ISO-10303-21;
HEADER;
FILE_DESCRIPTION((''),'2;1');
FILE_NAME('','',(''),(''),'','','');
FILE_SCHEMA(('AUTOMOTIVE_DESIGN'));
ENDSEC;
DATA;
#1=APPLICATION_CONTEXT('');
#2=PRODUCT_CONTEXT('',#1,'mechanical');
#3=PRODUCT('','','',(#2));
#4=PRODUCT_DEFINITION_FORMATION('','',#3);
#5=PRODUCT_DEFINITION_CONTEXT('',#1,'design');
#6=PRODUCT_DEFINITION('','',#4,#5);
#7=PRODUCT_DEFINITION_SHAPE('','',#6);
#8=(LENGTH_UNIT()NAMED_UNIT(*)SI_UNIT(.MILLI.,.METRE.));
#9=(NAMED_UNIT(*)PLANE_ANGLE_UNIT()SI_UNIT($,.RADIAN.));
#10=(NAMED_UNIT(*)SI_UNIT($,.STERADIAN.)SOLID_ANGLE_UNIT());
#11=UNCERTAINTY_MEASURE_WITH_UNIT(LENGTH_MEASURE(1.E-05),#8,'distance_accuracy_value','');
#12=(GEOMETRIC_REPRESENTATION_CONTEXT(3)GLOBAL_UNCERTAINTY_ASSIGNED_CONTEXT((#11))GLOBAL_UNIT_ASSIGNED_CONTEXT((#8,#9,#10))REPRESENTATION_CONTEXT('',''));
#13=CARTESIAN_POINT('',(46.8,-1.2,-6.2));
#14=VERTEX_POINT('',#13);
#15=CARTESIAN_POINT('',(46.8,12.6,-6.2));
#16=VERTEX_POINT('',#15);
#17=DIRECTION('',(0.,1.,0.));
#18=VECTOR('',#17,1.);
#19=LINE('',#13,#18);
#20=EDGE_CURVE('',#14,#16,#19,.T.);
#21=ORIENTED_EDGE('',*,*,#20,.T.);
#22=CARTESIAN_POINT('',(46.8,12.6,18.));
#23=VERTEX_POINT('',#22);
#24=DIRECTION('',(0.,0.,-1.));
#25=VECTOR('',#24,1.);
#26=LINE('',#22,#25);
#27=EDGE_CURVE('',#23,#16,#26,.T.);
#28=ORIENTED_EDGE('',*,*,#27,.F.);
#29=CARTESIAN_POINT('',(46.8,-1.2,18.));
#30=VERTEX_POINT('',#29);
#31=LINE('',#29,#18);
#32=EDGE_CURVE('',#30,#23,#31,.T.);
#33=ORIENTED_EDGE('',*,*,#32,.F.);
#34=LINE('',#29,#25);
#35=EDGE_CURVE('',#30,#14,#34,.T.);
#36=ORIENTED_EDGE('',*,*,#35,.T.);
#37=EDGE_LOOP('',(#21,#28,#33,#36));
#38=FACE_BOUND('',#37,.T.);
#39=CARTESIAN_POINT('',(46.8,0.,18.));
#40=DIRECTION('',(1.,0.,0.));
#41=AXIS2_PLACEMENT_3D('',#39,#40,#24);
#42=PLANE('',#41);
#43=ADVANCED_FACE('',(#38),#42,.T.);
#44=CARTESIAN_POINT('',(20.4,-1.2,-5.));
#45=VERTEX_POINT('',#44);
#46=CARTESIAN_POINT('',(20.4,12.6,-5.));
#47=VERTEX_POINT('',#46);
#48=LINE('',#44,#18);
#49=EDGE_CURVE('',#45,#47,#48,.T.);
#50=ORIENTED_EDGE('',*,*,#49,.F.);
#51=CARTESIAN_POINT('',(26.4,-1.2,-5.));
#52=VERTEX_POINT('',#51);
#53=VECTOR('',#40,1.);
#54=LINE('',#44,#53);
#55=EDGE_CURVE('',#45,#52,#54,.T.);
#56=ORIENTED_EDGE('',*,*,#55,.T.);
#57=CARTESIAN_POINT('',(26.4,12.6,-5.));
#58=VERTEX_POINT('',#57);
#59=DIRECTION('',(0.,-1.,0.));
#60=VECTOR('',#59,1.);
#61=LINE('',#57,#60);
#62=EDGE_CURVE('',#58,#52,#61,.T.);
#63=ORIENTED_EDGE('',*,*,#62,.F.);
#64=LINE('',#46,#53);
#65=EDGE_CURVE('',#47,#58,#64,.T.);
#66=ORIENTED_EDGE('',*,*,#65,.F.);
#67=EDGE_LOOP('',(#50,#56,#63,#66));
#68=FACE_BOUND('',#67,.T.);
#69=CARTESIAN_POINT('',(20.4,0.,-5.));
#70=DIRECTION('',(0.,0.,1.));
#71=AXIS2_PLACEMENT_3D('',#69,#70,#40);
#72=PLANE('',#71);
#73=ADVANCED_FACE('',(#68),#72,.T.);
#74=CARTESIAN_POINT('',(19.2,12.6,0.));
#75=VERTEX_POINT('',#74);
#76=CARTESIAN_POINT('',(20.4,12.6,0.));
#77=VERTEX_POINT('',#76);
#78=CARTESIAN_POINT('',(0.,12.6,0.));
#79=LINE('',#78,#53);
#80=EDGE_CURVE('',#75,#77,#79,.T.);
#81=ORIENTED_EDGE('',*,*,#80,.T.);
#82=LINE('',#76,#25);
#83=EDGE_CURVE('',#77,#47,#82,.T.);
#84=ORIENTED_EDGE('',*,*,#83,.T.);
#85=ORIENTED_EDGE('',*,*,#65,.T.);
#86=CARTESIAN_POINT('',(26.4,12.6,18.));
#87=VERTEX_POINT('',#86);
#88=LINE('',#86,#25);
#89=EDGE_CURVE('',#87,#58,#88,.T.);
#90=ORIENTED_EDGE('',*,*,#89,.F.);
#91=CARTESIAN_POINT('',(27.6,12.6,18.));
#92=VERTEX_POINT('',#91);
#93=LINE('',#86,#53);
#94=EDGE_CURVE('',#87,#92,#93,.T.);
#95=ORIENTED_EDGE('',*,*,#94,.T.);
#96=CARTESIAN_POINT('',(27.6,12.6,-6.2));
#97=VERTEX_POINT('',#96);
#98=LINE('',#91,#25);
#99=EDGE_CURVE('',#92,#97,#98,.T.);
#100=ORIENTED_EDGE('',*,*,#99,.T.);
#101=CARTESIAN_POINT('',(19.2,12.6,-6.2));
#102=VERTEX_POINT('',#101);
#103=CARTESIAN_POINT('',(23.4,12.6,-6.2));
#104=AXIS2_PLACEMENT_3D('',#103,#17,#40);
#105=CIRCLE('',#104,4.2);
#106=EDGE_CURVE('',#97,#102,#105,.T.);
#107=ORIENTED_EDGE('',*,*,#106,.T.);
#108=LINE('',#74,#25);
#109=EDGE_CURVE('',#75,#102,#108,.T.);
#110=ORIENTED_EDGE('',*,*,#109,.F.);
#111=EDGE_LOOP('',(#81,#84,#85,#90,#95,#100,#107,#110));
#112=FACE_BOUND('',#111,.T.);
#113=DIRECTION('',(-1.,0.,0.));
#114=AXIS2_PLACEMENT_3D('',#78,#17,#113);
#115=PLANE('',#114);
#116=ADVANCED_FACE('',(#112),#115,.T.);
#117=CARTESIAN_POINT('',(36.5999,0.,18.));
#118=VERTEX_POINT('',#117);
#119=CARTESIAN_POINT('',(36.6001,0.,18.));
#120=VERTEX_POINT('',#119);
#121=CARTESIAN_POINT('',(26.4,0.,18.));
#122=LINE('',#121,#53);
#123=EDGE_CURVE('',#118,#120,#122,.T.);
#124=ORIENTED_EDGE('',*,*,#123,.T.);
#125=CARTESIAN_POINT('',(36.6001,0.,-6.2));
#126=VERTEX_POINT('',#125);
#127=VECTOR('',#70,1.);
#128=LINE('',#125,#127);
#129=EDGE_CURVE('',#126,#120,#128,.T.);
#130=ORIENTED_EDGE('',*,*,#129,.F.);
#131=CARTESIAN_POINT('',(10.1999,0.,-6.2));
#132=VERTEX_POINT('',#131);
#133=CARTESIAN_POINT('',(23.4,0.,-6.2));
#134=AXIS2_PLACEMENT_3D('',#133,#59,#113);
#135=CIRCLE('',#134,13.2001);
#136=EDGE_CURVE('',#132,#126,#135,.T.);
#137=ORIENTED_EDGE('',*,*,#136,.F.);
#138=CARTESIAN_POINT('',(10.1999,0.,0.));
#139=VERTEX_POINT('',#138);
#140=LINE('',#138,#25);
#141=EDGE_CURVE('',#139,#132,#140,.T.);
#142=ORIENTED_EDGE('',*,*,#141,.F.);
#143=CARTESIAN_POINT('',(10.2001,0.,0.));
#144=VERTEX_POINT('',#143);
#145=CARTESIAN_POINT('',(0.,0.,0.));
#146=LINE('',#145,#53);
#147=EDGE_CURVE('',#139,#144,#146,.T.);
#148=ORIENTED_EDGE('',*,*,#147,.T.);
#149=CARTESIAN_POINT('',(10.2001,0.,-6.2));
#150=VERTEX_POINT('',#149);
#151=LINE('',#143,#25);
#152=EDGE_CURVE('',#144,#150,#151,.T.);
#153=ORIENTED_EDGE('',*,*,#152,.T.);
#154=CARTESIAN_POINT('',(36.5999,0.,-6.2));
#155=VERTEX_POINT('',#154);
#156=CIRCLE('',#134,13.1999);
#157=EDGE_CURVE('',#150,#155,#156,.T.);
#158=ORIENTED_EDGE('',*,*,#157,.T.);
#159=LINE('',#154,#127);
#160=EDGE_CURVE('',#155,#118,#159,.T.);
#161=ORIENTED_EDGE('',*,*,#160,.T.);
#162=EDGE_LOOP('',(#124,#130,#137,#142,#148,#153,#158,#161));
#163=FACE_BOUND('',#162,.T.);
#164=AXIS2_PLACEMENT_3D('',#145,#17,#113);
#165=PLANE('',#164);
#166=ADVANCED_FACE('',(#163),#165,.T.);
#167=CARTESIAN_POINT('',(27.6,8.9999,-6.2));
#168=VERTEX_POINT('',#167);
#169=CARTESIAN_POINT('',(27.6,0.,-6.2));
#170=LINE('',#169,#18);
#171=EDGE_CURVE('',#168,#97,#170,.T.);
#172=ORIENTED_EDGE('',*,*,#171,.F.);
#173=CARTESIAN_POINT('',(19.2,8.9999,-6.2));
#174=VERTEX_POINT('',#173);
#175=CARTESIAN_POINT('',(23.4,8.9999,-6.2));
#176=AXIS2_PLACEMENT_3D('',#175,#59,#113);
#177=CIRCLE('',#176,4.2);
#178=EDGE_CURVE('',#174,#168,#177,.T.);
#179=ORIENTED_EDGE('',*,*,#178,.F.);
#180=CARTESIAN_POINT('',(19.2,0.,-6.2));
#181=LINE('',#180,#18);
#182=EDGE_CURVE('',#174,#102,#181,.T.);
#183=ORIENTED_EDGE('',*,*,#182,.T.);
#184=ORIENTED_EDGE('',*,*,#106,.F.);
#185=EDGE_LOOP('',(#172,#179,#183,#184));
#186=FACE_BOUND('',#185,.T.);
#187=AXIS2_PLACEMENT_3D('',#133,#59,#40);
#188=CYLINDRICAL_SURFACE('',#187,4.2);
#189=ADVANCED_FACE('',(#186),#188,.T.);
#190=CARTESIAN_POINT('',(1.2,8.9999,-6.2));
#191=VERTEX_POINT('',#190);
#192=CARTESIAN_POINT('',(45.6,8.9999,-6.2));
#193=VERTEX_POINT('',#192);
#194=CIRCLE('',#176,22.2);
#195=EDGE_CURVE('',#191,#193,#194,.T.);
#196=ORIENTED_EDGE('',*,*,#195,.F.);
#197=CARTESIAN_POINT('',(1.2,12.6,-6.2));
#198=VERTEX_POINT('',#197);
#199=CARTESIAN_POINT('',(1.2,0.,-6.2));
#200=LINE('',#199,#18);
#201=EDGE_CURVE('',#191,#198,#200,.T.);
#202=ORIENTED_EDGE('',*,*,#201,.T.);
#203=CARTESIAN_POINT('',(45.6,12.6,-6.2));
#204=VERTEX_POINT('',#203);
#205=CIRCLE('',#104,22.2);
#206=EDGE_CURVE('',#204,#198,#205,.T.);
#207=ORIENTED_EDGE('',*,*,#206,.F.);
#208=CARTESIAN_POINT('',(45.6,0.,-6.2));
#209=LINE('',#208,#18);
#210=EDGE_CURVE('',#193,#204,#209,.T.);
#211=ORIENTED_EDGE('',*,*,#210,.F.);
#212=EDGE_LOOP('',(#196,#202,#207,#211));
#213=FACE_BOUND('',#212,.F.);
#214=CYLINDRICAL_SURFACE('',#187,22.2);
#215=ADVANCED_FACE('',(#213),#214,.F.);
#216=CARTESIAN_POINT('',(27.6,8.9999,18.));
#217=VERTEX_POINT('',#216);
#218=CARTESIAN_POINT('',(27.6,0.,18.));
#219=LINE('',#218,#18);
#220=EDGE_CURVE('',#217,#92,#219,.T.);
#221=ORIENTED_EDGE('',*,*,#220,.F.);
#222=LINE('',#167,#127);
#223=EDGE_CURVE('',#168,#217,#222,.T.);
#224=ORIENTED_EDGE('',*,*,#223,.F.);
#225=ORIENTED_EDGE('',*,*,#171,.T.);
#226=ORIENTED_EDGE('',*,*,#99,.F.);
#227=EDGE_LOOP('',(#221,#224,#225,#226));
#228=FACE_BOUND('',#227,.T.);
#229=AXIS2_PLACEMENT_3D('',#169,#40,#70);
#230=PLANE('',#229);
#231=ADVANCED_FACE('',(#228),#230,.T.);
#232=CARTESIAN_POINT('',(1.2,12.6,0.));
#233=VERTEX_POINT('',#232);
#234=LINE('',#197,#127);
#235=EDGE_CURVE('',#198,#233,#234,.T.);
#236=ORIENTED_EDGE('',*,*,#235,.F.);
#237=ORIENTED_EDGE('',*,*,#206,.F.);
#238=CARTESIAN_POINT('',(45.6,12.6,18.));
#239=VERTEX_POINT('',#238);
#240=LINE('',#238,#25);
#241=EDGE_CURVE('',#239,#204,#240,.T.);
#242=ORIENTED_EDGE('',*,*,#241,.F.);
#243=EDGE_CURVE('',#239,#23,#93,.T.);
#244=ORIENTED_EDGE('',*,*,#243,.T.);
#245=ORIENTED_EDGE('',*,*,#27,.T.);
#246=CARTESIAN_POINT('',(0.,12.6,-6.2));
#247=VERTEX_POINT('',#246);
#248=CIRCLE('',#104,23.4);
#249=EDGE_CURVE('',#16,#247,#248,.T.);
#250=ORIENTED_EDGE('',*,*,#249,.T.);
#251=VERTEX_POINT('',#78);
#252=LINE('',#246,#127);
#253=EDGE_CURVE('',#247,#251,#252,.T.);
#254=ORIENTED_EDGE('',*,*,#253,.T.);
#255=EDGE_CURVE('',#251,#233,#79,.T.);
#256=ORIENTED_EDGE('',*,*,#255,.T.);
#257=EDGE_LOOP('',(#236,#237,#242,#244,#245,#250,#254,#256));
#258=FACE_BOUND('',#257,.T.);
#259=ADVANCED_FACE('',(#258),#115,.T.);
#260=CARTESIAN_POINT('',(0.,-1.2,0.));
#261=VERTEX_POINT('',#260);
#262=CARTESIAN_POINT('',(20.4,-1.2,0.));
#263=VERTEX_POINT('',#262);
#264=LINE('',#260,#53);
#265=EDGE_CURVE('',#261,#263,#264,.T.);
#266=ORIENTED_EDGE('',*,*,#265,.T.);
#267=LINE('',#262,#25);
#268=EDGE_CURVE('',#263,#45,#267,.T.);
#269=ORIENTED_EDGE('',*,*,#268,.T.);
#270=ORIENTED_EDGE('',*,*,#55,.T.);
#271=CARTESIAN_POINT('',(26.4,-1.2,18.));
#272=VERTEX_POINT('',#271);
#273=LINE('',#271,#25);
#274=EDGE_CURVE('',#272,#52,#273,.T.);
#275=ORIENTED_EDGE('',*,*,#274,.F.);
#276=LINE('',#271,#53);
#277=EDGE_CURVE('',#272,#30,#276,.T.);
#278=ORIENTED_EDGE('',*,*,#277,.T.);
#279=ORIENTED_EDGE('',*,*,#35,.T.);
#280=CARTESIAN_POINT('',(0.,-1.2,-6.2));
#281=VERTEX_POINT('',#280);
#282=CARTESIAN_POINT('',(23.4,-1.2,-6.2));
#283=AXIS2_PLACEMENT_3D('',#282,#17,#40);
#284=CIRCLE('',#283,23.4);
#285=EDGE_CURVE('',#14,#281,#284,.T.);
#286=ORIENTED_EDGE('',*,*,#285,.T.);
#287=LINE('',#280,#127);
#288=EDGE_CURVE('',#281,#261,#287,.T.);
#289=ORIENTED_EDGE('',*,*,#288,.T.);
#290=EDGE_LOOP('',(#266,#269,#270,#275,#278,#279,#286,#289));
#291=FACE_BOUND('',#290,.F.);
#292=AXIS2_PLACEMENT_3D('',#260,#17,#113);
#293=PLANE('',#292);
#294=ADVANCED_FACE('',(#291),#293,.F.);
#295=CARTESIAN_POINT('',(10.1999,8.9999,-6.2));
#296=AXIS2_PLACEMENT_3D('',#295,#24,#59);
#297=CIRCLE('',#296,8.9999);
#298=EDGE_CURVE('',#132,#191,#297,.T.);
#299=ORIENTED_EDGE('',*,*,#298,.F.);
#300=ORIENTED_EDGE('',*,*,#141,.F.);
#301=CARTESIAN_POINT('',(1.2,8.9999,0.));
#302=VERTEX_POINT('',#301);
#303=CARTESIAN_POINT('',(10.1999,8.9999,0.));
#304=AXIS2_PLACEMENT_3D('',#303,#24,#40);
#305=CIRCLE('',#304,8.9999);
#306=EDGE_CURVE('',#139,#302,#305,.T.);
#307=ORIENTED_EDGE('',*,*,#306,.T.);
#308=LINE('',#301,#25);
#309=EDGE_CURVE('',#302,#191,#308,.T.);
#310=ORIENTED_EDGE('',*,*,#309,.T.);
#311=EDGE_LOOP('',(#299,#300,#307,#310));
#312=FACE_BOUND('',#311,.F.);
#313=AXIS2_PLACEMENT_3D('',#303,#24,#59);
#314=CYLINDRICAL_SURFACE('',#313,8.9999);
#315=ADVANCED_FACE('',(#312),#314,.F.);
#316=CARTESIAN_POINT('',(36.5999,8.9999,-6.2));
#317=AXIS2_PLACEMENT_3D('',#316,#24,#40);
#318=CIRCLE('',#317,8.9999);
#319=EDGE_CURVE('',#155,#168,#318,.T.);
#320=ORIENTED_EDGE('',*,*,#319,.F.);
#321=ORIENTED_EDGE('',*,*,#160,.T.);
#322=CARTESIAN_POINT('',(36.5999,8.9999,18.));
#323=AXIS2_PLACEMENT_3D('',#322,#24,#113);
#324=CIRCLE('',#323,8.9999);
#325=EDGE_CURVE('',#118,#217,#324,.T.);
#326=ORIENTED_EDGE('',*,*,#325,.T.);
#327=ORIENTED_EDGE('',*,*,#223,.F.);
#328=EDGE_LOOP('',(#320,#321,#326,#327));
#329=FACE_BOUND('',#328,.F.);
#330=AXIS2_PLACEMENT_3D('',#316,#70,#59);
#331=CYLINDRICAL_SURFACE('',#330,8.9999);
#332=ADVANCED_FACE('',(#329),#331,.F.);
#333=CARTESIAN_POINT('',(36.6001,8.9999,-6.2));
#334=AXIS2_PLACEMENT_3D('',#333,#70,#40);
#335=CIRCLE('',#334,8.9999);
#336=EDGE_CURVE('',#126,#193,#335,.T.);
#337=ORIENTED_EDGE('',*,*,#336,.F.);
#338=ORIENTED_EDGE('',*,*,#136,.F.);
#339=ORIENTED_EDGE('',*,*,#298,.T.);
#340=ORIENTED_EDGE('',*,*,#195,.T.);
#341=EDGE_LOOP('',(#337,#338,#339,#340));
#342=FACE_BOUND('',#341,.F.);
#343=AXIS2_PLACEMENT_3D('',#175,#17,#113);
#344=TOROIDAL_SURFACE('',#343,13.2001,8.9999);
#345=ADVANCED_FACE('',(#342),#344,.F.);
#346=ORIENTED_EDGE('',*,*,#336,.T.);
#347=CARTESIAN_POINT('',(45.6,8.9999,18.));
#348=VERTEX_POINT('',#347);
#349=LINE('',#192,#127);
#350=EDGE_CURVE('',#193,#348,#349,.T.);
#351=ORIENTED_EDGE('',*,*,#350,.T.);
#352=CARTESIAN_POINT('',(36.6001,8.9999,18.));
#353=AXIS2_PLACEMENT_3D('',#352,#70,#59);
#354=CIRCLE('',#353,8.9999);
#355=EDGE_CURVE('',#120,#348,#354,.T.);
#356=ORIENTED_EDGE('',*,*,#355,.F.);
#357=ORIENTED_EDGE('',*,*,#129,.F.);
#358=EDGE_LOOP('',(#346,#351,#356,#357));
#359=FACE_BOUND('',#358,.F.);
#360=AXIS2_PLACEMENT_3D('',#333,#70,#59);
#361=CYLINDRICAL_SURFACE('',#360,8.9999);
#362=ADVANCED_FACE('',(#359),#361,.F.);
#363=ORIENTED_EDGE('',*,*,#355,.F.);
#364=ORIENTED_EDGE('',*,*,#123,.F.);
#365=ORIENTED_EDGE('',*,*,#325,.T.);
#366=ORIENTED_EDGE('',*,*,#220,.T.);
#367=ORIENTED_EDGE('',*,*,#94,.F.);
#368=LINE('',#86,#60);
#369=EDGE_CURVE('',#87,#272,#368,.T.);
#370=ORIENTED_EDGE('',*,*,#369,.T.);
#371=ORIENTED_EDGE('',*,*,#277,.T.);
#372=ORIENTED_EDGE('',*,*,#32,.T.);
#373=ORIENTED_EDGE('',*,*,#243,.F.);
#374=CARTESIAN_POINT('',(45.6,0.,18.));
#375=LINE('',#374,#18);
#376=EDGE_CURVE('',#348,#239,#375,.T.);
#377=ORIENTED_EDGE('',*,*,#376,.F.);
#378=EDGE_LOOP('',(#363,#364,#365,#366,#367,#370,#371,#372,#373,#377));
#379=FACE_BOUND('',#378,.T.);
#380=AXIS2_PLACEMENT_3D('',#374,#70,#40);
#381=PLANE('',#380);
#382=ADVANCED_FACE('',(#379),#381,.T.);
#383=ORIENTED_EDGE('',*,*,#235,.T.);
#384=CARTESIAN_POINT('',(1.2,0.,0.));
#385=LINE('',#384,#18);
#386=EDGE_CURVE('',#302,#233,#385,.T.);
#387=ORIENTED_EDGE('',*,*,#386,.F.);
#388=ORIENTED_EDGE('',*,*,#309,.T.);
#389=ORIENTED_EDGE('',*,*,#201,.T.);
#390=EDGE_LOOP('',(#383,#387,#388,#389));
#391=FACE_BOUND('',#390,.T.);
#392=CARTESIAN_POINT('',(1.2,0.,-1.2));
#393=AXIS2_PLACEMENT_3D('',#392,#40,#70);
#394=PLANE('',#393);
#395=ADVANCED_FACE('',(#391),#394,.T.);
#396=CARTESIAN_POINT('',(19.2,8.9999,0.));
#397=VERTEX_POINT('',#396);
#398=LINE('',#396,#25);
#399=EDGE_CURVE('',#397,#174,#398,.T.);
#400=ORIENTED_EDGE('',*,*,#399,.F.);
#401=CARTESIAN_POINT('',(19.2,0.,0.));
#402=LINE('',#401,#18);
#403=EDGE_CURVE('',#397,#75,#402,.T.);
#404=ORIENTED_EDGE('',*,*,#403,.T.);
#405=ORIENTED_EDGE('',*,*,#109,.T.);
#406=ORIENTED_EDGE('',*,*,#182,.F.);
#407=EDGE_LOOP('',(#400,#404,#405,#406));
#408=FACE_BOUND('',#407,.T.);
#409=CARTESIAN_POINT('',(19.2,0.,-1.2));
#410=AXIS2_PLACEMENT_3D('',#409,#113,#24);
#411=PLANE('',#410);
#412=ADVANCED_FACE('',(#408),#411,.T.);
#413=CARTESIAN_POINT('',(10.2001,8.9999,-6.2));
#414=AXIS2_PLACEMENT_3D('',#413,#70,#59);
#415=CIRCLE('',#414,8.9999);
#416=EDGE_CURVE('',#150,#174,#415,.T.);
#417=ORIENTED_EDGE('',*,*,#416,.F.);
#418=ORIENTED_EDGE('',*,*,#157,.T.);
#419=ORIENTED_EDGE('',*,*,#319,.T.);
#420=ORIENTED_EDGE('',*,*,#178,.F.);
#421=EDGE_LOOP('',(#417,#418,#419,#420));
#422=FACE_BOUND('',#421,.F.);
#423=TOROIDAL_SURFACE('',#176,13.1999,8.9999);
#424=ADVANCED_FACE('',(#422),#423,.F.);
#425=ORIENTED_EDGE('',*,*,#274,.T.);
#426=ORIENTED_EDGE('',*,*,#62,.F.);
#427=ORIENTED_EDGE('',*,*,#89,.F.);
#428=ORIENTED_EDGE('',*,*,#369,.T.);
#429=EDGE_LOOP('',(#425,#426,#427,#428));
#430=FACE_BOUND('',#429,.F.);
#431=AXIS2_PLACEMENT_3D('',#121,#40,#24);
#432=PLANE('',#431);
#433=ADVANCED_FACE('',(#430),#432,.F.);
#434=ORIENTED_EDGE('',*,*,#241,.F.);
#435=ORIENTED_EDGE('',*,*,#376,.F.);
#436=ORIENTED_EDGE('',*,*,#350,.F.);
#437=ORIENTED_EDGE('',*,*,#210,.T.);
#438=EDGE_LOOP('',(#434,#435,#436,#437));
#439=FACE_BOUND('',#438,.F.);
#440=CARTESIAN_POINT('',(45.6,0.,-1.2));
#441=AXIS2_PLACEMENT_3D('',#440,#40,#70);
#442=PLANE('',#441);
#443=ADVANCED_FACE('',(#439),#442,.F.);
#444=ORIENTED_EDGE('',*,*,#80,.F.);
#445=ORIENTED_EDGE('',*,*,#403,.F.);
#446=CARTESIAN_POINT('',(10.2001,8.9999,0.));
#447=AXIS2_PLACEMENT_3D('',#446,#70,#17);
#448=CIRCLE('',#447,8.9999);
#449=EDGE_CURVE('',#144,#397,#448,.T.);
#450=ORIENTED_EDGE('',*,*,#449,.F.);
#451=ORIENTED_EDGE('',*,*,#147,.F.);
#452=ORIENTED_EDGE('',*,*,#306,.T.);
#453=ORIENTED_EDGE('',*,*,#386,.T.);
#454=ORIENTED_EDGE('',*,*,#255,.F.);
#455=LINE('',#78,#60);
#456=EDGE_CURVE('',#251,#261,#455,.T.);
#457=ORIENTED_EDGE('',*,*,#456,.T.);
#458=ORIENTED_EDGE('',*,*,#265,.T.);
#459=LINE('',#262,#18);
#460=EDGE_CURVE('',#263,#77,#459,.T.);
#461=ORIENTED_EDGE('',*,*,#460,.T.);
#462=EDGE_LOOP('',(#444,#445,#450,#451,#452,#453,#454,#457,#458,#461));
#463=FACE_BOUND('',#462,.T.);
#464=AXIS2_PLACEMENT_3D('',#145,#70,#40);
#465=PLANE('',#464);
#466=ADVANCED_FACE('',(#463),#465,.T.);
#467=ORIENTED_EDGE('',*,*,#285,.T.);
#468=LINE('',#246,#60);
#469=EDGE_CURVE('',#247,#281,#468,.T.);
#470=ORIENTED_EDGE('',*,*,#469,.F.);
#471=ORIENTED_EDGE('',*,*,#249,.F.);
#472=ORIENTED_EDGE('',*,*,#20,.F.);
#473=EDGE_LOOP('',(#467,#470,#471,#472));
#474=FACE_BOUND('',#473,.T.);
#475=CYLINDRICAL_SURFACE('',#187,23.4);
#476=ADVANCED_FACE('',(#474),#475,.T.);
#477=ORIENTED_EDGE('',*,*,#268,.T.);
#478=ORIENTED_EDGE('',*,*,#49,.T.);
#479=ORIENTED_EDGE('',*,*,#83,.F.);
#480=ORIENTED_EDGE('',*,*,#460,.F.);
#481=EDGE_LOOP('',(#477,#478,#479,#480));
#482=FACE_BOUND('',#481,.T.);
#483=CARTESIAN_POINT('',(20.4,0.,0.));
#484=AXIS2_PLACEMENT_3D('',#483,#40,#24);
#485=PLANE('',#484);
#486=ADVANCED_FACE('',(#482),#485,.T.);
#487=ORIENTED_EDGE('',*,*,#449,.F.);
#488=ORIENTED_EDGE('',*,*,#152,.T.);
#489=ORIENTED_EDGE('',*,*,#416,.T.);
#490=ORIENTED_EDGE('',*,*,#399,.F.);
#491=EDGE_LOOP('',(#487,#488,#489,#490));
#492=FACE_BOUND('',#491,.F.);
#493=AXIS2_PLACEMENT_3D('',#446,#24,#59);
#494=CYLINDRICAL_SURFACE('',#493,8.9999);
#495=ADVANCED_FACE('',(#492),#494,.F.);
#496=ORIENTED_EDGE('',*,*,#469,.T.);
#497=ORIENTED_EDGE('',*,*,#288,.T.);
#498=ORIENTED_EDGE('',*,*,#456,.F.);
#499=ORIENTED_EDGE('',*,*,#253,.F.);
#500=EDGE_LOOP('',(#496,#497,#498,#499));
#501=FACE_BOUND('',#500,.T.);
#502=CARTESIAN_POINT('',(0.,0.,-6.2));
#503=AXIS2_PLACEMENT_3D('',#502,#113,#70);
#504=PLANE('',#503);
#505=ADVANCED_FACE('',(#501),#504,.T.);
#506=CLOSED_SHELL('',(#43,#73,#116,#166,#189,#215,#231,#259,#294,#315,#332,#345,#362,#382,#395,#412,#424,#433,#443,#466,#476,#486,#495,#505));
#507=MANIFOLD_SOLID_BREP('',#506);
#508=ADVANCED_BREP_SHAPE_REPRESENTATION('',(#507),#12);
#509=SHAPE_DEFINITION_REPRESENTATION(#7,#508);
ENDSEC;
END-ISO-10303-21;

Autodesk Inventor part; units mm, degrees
ref_plane "YZ Plane" through (0, 0, 0) normal (1, 0, 0) x (0, 1, 0)
ref_plane "XZ Plane" through (0, 0, 0) normal (0, 1, 0) x (-1, 0, 0)
ref_plane "XY Plane" through (0, 0, 0) normal (0, 0, 1) x (1, 0, 0)
sketch "Esboço1" plane through (0, 0, 0) normal (0, 1, 0) x (-1, 0, 0)
  line L0 (-1.2, -1.2) -> (-19.2, -1.2)
  line L1 (-19.2, -1.2) -> (-19.2, -6.2)
  line L2 (-19.2, -6.2) -> (-27.6, -6.2)
  line L3 (-27.6, -6.2) -> (-27.6, -1.2)
  line L4 (-27.6, -1.2) -> (-45.6, -1.2)
  line L5 (-45.6, -1.2) -> (-45.6, -6.2)
  arc A0 (-45.6, -6.2) -> (-1.2, -6.2) centre (-23.4, -6.2) ccw
  line L6 (-23.4, -6.2) -> (-45.6, -6.2) construction
  line L7 (-23.4, -6.2) -> (-1.2, -6.2) construction
  line L8 (-1.2, -6.2) -> (-1.2, -1.2)
  arc A1 (-46.8, -6.2) -> (0, -6.2) centre (-23.4, -6.2) ccw
  line L9 (0, -6.2) -> (0, 0)
  line L10 (0, 0) -> (-20.4, 0)
  line L11 (-20.4, 0) -> (-20.4, -5)
  line L12 (-20.4, -5) -> (-26.4, -5)
  line L13 (-46.8, 18) -> (-46.8, -6.2)
  line L14 (-27.6, -1.2) -> (-27.6, 18)
  line L15 (-19.2, -1.2) -> (-19.2, 0)
  line L16 (-1.2, -1.2) -> (-1.2, 0)
  arc A2 (-27.6, -6.2) -> (-19.2, -6.2) centre (-23.4, -6.2) ccw
  line L17 (-26.4, 18) -> (-46.8, 18)
  line L18 (-45.6, -1.2) -> (-45.6, 18)
  line L19 (-26.4, 18) -> (-26.4, -5)
  point P0 (-23.4, -6.2)
  point P1 (-46.8, -6.2)
  point P2 (-19.2, -6.2)
  point P3 (-27.6, -6.2)
  point P4 (-45.6, -6.2)
  point P5 (-36.6, 18)
  point P6 (-36.6, -1.2)
  point P7 (-45.6, -3.7)
  point P8 (-45.6, 8.4)
  point P9 (-23.4, -5)
  point P10 (-26.4, 6.5)
  dimension "d0" = 18
  dimension "d1" = 180
  dimension "d3" = 1.2
  dimension "d7" = 18
  dimension "d15" = 1.2
  dimension "d16" = 6
  dimension "d18" = 19.2
  dimension "d19" = 5
extrude "Extrusão1" add sketch "Esboço1" against normal blind 1.2
extrude "Extrusão3" add sketch "Esboço1" along normal blind 12.6 contours L16 L10 L9 A1 L13 L17 L18 L5 A0 L8 | L1 L2 L3 L14 L17 L19 L12 L11 L10 L15 | A2 L2
fillet "Arredondamento1" radius 9 6 edges at (1.2, 0, -3.1) (45.6, 0, 5.9) (23.4, 0, -28.4) (27.6, 0, 5.9) (19.2, 0, -3.1) (23.4, 0, -10.4)
equation "\"d0\" = Diâmetro_esfera"
equation "\"d3\" = Margem"
equation "\"d15\" = Margem"
equation "\"d16\" = Espessura_torre_base"
equation "\"d8\" = Margem"
equation "\"d12\" = 0.7 * Diâmetro_esfera"
equation "\"d14\" = 0.5 * Diâmetro_esfera"
equation "\"Diâmetro_esfera\" = 18"
equation "\"Filamento\" = 0.4"
equation "\"Margem\" = 3 * Filamento"
equation "\"Espessura_torre_base\" = 15 * Filamento"
properties part number "Troca de sentido" material "Plástico PET"
